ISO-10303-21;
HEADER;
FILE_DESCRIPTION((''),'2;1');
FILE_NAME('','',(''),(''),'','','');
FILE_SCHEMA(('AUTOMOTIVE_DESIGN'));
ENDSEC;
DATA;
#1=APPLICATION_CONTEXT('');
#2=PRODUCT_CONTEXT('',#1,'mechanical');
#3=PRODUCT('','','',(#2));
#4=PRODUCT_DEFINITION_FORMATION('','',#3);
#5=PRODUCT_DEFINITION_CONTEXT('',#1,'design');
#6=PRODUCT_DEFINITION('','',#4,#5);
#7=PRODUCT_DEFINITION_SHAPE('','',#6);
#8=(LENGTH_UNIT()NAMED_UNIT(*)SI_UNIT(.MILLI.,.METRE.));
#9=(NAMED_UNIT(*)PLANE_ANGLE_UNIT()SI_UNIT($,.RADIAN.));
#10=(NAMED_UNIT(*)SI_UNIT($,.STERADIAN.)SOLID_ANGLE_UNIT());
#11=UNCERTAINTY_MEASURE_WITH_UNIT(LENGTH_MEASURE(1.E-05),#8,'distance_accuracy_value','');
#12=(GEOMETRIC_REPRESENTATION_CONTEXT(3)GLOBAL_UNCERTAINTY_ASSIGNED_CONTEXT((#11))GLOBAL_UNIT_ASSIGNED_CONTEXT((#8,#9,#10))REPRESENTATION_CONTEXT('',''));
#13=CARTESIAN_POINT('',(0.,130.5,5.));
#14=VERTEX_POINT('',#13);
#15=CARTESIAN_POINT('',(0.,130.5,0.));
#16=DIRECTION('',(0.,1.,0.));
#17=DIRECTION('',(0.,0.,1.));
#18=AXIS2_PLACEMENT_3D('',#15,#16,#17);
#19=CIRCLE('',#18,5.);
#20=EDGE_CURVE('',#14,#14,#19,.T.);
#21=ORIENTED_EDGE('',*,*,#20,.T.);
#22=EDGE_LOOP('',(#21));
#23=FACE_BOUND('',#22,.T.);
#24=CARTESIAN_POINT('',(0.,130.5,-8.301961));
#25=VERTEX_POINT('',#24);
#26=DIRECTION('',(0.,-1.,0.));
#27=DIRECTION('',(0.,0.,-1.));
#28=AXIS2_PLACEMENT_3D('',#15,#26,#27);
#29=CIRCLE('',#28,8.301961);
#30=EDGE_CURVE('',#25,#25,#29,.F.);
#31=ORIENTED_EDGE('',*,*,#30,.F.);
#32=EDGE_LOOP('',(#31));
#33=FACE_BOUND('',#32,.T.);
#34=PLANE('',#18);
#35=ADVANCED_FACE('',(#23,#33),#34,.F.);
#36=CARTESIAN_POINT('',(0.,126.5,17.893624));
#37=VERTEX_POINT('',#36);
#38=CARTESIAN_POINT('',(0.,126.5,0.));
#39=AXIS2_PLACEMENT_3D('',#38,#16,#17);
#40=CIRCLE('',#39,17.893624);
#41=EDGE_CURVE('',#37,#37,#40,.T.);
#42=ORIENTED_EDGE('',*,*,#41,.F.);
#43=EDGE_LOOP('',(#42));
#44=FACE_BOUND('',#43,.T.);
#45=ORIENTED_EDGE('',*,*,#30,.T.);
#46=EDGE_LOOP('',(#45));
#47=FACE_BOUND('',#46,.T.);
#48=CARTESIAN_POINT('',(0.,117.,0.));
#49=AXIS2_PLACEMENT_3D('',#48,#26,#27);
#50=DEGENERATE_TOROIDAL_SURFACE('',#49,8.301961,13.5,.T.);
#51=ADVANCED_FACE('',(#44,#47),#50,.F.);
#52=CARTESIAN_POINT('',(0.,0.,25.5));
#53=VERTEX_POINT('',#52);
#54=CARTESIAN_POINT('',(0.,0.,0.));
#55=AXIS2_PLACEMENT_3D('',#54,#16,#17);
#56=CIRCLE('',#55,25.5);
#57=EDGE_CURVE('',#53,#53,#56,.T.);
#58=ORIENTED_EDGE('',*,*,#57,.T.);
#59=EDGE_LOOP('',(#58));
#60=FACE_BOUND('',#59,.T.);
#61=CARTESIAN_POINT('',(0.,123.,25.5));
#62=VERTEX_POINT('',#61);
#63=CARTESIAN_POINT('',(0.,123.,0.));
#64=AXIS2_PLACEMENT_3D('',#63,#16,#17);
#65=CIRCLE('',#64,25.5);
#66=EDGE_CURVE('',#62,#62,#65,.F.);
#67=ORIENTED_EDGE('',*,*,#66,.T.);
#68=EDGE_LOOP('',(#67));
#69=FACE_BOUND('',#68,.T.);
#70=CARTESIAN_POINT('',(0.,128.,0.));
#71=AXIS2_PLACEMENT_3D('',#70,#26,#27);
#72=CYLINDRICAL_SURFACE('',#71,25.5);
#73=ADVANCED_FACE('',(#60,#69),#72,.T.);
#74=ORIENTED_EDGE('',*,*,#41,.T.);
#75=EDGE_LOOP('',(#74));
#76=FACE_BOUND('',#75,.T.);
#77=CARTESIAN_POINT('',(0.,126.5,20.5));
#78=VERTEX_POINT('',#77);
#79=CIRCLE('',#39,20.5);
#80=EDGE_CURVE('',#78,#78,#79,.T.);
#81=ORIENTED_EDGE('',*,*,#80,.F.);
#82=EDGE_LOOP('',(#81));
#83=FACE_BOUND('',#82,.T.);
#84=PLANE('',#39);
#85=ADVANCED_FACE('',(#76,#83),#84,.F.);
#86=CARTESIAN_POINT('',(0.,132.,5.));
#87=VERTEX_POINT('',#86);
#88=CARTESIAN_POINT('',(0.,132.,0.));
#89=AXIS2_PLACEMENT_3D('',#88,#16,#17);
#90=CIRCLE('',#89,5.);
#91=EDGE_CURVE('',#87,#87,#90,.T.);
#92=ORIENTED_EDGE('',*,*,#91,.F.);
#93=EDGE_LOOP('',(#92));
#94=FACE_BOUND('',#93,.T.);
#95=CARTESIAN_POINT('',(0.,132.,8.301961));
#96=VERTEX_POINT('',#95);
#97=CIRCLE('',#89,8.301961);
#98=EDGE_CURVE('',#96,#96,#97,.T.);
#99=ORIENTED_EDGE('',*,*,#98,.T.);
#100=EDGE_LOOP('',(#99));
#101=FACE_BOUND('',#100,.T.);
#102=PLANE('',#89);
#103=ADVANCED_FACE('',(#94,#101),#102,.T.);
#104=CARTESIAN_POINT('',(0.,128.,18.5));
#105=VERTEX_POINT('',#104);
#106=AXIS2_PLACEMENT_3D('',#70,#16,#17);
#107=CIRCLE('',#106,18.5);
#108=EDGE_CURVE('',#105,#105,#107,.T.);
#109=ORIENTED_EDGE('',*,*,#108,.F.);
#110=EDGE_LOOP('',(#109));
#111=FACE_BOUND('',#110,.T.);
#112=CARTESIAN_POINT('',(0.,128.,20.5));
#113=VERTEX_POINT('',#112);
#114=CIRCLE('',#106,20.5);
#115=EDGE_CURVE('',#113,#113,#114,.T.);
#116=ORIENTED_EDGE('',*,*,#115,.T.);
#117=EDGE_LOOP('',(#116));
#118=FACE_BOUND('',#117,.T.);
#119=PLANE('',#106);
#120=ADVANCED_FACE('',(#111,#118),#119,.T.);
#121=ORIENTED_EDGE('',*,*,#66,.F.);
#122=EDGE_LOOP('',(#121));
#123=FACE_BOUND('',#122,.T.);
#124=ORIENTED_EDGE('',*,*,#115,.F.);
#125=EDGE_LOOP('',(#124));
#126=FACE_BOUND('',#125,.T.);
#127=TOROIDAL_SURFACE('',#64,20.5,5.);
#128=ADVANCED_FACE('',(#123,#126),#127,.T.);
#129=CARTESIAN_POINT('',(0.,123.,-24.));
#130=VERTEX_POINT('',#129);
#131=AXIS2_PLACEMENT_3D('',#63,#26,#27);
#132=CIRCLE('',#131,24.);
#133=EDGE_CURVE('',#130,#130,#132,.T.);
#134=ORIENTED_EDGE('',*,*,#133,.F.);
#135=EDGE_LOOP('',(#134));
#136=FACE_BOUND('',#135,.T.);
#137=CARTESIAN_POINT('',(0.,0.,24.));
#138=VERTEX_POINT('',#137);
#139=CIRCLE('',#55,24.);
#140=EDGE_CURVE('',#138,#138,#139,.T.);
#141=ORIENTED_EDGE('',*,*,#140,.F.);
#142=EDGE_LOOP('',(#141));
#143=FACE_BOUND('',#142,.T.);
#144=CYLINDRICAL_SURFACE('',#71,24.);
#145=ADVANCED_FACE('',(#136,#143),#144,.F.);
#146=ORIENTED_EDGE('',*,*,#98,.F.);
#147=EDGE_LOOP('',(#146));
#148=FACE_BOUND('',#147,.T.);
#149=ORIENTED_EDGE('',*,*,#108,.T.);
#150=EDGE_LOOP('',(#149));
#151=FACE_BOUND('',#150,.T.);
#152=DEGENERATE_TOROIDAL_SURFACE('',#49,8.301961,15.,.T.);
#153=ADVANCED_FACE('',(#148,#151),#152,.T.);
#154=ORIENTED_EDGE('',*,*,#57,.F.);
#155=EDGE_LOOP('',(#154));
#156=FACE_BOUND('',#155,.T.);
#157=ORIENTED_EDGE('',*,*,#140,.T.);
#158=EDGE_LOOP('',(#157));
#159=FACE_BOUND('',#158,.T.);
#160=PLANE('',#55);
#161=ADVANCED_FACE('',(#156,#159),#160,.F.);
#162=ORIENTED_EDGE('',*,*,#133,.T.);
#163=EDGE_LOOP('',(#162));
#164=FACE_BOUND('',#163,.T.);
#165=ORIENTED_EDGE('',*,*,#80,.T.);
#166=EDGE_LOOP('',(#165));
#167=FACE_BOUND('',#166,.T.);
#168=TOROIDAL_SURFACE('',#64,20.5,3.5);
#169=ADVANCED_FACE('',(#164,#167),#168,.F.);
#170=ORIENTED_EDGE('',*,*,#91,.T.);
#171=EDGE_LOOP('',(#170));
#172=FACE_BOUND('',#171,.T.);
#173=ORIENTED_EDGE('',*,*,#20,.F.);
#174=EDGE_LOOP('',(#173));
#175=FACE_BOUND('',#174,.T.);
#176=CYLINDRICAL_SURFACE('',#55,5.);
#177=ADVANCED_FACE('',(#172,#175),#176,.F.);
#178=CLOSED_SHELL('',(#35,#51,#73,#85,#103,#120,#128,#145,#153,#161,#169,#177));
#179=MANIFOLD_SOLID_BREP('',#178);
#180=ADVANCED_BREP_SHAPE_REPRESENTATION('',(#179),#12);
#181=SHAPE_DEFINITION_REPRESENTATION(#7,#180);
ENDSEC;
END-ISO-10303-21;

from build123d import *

# Parameters (mm, degrees)
SKETCH1_R           = 25.5
BOSS_EXTRUDE1_DEPTH = 128
FILLET2_R           = 5
SKETCH2_R           = 18.5
BOSS_EXTRUDE2_DEPTH = 4
FILLET5_R           = 15
SKETCH3_R           = 5
CUT_EXTRUDE1_DEPTH  = 137.83749488


# Read off the part's stored shape, not the designer's step: Shell1
with BuildPart() as part:
    # Sketch1 → Boss-Extrude1 (new body)
    with BuildSketch(Plane(origin=(0, 0, 0), x_dir=(1, 0, 0), z_dir=(0, 1, 0))):
        with Locations(Location((0, 0, 0), (0, 0, 270))):
            Circle(SKETCH1_R)
    extrude(amount=BOSS_EXTRUDE1_DEPTH)

    # Fillet2
    fillet2_edges = [part.edges().sort_by_distance(p)[0] for p in [
        (0, 128, -25.5),
    ]]
    fillet(fillet2_edges, radius=FILLET2_R)

    # Sketch2 → Boss-Extrude2 (add)
    with BuildSketch(Plane(origin=(0, 128, 0), x_dir=(1, 0, 0), z_dir=(0, 1, 0))):
        with Locations(Location((0, 0, 0), (0, 0, 270))):
            Circle(SKETCH2_R)
    extrude(amount=BOSS_EXTRUDE2_DEPTH)

    # Fillet5
    # the kernel refuses this fillet: 15 mm, written as the material it takes off along each edge
    with BuildSketch(Plane(origin=(0, 132, 0), x_dir=(0, 0, 1), z_dir=(-1, 0, 0))) as fillet5_piece_1:
        with BuildLine():
            CenterArc((8.301960973, -15), FILLET5_R, 47.166571934, 42.833428066)
            Line((8.301960973, 0), (8.301960973, 0.3))
            Line((8.301960973, 0.3), (18.5, 0.3))
            Line((18.5, 0.3), (18.8, 0))
            ThreePointArc((18.8, 0), (18.8, -2), (18.703960781, -3.78))
            Line((18.703960781, -3.78), (18.5, -4))
        make_face()
    revolve(axis=Axis((0, 132, 0), (0, 1, 0)), mode=Mode.SUBTRACT)

    # Shell1 outline → Shell1 (revolve, cut)
    with BuildSketch(Plane.XY):
        with BuildLine():
            Line((24, 0), (24, 123))
            ThreePointArc((24, 123), (22.974873734, 125.474873734), (20.5, 126.5))
            Line((20.5, 126.5), (17.893624019, 126.5))
            ThreePointArc((17.893624019, 126.5), (13.498113395, 129.459935794), (8.301960973, 130.5))
            Line((8.301960973, 130.5), (0, 130.5))
            Line((0, 130.5), (0, 0))
            Line((0, 0), (24, 0))
        make_face()
    revolve(axis=Axis((0, 0, 0), (0, 1, 0)), mode=Mode.SUBTRACT)

    # Sketch3 → Cut-Extrude1 (cut, through all)
    with BuildSketch(Plane(origin=(0, 132, 0), x_dir=(1, 0, 0), z_dir=(0, 1, 0))):
        with Locations(Location((0, 0, 0), (0, 0, 270))):
            Circle(SKETCH3_R)
    extrude(amount=-CUT_EXTRUDE1_DEPTH, mode=Mode.SUBTRACT)


solid = part.part
